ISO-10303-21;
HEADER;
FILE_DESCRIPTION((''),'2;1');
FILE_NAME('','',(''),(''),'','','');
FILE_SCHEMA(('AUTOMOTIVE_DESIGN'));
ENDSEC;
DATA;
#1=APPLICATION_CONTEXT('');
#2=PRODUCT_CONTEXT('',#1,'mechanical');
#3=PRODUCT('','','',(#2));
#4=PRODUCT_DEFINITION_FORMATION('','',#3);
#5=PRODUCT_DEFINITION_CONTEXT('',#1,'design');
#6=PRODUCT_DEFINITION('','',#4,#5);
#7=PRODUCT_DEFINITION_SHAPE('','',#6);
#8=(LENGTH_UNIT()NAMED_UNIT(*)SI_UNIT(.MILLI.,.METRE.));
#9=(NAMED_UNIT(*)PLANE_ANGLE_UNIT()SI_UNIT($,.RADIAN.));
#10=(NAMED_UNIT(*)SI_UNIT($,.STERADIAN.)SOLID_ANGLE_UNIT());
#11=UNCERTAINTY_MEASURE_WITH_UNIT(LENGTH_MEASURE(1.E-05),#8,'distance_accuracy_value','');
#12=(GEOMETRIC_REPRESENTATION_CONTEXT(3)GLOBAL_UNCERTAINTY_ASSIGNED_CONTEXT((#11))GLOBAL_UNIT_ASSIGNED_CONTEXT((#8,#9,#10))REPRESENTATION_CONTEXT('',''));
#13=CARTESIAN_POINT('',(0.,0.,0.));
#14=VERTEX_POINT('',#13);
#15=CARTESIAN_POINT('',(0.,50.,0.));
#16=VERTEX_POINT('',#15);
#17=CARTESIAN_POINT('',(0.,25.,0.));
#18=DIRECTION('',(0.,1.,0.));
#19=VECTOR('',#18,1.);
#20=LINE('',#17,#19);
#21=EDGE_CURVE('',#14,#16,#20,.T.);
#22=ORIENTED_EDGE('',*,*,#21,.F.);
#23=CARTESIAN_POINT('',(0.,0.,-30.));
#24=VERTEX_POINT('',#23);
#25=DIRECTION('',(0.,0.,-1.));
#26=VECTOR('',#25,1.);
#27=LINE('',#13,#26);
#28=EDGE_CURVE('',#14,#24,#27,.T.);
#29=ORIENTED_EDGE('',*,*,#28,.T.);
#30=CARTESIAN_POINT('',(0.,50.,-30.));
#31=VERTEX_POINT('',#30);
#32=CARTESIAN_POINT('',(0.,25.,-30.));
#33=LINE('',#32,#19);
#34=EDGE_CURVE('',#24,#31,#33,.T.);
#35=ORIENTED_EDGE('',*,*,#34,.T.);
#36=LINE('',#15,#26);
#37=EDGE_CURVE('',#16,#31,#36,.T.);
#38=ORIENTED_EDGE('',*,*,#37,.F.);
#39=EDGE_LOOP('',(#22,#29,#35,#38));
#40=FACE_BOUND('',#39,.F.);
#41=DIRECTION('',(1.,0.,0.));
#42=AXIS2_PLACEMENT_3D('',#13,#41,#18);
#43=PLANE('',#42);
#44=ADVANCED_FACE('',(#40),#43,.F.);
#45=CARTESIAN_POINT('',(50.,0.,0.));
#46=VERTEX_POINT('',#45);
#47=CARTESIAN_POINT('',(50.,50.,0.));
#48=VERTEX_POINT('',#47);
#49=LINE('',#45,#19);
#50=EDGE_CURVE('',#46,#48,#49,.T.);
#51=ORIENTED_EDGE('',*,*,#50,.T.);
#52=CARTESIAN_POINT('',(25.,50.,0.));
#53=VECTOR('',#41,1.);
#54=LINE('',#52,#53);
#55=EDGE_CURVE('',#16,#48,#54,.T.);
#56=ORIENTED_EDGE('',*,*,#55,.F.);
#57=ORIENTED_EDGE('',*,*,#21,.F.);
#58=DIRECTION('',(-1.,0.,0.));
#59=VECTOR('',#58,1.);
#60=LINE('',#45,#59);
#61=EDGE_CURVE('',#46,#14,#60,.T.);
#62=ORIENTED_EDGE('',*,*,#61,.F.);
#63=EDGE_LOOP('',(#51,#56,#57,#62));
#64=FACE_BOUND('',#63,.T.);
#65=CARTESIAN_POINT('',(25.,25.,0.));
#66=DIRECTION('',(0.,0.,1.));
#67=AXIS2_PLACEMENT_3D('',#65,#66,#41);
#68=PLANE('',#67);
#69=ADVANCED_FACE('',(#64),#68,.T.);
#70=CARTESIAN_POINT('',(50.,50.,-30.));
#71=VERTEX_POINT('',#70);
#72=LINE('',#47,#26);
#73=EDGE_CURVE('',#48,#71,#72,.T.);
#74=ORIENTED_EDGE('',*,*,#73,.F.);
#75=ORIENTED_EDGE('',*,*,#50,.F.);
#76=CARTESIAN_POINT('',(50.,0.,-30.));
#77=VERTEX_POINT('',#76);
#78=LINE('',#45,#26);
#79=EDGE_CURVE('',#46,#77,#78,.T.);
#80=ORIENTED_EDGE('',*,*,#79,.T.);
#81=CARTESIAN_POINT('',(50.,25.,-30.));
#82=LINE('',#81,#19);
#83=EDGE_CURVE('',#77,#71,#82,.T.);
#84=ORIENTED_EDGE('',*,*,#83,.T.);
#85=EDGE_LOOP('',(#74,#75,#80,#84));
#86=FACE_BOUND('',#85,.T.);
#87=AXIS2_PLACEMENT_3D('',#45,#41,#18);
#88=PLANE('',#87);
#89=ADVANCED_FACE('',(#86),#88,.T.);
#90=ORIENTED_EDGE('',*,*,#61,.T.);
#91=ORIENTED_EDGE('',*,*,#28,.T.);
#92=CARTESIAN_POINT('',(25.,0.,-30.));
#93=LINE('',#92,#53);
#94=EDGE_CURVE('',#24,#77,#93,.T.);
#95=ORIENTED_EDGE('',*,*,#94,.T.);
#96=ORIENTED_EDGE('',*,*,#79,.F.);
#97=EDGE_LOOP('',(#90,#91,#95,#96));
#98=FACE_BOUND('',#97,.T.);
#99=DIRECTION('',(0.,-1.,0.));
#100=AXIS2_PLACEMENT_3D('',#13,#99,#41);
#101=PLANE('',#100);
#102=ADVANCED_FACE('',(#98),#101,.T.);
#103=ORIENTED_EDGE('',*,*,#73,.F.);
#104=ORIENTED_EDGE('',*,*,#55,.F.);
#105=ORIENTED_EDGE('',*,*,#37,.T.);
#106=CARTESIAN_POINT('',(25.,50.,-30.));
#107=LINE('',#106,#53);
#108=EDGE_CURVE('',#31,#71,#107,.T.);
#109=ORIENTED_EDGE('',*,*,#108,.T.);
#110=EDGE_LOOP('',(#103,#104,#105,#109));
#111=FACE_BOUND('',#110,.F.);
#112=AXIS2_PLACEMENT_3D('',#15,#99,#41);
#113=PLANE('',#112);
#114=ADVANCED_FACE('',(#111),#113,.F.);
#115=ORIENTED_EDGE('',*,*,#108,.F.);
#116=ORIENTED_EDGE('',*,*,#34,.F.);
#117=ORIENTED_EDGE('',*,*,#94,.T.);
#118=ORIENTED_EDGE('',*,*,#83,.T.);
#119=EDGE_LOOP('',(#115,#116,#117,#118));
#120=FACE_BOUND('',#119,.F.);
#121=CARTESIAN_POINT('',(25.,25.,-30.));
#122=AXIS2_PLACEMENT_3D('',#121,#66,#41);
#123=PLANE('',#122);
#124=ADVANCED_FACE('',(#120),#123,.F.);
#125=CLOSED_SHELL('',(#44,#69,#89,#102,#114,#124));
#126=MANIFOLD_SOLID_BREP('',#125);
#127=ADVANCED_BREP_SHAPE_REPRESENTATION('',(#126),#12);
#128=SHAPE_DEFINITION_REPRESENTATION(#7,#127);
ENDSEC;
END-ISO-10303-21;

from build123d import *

# Parameters (mm, degrees)
F4_W     = 50
F4_H     = 50
F5_DEPTH = 30


with BuildPart() as f5:
    # F4 (on Top) → F5 (new body)
    with BuildSketch(Plane.XY):
        with Locations((25, 25)):
            Rectangle(F4_W, F4_H)
    extrude(amount=-F5_DEPTH)

    # F1 (on Front) → F6 section 0
    with BuildSketch(Plane.XZ):
        with BuildLine():
            Line((40, 0), (10, 0))
            Line((10, 0), (28.3937944681, -18.3937944681))
            ThreePointArc((28.3937944681, -18.3937944681), (33.3782491174, -19.6437206946), (36.8322317524, -15.8388412378))
            Line((36.8322317524, -15.8388412378), (40, 0))
        make_face()
    # F3 (on offset) → F6 section 1
    with BuildSketch(Plane.YZ.offset(50)):
        with BuildLine():
            Line((40, 0), (10, 0))
            Line((10, 0), (24.3103555535, -8.5862133321))
            ThreePointArc((24.3103555535, -8.5862133321), (32.9247755851, -9.390134224), (38.9421460883, -3.1735617351))
            Line((38.9421460883, -3.1735617351), (40, 0))
        make_face()
    loft()


solid = f5.part
